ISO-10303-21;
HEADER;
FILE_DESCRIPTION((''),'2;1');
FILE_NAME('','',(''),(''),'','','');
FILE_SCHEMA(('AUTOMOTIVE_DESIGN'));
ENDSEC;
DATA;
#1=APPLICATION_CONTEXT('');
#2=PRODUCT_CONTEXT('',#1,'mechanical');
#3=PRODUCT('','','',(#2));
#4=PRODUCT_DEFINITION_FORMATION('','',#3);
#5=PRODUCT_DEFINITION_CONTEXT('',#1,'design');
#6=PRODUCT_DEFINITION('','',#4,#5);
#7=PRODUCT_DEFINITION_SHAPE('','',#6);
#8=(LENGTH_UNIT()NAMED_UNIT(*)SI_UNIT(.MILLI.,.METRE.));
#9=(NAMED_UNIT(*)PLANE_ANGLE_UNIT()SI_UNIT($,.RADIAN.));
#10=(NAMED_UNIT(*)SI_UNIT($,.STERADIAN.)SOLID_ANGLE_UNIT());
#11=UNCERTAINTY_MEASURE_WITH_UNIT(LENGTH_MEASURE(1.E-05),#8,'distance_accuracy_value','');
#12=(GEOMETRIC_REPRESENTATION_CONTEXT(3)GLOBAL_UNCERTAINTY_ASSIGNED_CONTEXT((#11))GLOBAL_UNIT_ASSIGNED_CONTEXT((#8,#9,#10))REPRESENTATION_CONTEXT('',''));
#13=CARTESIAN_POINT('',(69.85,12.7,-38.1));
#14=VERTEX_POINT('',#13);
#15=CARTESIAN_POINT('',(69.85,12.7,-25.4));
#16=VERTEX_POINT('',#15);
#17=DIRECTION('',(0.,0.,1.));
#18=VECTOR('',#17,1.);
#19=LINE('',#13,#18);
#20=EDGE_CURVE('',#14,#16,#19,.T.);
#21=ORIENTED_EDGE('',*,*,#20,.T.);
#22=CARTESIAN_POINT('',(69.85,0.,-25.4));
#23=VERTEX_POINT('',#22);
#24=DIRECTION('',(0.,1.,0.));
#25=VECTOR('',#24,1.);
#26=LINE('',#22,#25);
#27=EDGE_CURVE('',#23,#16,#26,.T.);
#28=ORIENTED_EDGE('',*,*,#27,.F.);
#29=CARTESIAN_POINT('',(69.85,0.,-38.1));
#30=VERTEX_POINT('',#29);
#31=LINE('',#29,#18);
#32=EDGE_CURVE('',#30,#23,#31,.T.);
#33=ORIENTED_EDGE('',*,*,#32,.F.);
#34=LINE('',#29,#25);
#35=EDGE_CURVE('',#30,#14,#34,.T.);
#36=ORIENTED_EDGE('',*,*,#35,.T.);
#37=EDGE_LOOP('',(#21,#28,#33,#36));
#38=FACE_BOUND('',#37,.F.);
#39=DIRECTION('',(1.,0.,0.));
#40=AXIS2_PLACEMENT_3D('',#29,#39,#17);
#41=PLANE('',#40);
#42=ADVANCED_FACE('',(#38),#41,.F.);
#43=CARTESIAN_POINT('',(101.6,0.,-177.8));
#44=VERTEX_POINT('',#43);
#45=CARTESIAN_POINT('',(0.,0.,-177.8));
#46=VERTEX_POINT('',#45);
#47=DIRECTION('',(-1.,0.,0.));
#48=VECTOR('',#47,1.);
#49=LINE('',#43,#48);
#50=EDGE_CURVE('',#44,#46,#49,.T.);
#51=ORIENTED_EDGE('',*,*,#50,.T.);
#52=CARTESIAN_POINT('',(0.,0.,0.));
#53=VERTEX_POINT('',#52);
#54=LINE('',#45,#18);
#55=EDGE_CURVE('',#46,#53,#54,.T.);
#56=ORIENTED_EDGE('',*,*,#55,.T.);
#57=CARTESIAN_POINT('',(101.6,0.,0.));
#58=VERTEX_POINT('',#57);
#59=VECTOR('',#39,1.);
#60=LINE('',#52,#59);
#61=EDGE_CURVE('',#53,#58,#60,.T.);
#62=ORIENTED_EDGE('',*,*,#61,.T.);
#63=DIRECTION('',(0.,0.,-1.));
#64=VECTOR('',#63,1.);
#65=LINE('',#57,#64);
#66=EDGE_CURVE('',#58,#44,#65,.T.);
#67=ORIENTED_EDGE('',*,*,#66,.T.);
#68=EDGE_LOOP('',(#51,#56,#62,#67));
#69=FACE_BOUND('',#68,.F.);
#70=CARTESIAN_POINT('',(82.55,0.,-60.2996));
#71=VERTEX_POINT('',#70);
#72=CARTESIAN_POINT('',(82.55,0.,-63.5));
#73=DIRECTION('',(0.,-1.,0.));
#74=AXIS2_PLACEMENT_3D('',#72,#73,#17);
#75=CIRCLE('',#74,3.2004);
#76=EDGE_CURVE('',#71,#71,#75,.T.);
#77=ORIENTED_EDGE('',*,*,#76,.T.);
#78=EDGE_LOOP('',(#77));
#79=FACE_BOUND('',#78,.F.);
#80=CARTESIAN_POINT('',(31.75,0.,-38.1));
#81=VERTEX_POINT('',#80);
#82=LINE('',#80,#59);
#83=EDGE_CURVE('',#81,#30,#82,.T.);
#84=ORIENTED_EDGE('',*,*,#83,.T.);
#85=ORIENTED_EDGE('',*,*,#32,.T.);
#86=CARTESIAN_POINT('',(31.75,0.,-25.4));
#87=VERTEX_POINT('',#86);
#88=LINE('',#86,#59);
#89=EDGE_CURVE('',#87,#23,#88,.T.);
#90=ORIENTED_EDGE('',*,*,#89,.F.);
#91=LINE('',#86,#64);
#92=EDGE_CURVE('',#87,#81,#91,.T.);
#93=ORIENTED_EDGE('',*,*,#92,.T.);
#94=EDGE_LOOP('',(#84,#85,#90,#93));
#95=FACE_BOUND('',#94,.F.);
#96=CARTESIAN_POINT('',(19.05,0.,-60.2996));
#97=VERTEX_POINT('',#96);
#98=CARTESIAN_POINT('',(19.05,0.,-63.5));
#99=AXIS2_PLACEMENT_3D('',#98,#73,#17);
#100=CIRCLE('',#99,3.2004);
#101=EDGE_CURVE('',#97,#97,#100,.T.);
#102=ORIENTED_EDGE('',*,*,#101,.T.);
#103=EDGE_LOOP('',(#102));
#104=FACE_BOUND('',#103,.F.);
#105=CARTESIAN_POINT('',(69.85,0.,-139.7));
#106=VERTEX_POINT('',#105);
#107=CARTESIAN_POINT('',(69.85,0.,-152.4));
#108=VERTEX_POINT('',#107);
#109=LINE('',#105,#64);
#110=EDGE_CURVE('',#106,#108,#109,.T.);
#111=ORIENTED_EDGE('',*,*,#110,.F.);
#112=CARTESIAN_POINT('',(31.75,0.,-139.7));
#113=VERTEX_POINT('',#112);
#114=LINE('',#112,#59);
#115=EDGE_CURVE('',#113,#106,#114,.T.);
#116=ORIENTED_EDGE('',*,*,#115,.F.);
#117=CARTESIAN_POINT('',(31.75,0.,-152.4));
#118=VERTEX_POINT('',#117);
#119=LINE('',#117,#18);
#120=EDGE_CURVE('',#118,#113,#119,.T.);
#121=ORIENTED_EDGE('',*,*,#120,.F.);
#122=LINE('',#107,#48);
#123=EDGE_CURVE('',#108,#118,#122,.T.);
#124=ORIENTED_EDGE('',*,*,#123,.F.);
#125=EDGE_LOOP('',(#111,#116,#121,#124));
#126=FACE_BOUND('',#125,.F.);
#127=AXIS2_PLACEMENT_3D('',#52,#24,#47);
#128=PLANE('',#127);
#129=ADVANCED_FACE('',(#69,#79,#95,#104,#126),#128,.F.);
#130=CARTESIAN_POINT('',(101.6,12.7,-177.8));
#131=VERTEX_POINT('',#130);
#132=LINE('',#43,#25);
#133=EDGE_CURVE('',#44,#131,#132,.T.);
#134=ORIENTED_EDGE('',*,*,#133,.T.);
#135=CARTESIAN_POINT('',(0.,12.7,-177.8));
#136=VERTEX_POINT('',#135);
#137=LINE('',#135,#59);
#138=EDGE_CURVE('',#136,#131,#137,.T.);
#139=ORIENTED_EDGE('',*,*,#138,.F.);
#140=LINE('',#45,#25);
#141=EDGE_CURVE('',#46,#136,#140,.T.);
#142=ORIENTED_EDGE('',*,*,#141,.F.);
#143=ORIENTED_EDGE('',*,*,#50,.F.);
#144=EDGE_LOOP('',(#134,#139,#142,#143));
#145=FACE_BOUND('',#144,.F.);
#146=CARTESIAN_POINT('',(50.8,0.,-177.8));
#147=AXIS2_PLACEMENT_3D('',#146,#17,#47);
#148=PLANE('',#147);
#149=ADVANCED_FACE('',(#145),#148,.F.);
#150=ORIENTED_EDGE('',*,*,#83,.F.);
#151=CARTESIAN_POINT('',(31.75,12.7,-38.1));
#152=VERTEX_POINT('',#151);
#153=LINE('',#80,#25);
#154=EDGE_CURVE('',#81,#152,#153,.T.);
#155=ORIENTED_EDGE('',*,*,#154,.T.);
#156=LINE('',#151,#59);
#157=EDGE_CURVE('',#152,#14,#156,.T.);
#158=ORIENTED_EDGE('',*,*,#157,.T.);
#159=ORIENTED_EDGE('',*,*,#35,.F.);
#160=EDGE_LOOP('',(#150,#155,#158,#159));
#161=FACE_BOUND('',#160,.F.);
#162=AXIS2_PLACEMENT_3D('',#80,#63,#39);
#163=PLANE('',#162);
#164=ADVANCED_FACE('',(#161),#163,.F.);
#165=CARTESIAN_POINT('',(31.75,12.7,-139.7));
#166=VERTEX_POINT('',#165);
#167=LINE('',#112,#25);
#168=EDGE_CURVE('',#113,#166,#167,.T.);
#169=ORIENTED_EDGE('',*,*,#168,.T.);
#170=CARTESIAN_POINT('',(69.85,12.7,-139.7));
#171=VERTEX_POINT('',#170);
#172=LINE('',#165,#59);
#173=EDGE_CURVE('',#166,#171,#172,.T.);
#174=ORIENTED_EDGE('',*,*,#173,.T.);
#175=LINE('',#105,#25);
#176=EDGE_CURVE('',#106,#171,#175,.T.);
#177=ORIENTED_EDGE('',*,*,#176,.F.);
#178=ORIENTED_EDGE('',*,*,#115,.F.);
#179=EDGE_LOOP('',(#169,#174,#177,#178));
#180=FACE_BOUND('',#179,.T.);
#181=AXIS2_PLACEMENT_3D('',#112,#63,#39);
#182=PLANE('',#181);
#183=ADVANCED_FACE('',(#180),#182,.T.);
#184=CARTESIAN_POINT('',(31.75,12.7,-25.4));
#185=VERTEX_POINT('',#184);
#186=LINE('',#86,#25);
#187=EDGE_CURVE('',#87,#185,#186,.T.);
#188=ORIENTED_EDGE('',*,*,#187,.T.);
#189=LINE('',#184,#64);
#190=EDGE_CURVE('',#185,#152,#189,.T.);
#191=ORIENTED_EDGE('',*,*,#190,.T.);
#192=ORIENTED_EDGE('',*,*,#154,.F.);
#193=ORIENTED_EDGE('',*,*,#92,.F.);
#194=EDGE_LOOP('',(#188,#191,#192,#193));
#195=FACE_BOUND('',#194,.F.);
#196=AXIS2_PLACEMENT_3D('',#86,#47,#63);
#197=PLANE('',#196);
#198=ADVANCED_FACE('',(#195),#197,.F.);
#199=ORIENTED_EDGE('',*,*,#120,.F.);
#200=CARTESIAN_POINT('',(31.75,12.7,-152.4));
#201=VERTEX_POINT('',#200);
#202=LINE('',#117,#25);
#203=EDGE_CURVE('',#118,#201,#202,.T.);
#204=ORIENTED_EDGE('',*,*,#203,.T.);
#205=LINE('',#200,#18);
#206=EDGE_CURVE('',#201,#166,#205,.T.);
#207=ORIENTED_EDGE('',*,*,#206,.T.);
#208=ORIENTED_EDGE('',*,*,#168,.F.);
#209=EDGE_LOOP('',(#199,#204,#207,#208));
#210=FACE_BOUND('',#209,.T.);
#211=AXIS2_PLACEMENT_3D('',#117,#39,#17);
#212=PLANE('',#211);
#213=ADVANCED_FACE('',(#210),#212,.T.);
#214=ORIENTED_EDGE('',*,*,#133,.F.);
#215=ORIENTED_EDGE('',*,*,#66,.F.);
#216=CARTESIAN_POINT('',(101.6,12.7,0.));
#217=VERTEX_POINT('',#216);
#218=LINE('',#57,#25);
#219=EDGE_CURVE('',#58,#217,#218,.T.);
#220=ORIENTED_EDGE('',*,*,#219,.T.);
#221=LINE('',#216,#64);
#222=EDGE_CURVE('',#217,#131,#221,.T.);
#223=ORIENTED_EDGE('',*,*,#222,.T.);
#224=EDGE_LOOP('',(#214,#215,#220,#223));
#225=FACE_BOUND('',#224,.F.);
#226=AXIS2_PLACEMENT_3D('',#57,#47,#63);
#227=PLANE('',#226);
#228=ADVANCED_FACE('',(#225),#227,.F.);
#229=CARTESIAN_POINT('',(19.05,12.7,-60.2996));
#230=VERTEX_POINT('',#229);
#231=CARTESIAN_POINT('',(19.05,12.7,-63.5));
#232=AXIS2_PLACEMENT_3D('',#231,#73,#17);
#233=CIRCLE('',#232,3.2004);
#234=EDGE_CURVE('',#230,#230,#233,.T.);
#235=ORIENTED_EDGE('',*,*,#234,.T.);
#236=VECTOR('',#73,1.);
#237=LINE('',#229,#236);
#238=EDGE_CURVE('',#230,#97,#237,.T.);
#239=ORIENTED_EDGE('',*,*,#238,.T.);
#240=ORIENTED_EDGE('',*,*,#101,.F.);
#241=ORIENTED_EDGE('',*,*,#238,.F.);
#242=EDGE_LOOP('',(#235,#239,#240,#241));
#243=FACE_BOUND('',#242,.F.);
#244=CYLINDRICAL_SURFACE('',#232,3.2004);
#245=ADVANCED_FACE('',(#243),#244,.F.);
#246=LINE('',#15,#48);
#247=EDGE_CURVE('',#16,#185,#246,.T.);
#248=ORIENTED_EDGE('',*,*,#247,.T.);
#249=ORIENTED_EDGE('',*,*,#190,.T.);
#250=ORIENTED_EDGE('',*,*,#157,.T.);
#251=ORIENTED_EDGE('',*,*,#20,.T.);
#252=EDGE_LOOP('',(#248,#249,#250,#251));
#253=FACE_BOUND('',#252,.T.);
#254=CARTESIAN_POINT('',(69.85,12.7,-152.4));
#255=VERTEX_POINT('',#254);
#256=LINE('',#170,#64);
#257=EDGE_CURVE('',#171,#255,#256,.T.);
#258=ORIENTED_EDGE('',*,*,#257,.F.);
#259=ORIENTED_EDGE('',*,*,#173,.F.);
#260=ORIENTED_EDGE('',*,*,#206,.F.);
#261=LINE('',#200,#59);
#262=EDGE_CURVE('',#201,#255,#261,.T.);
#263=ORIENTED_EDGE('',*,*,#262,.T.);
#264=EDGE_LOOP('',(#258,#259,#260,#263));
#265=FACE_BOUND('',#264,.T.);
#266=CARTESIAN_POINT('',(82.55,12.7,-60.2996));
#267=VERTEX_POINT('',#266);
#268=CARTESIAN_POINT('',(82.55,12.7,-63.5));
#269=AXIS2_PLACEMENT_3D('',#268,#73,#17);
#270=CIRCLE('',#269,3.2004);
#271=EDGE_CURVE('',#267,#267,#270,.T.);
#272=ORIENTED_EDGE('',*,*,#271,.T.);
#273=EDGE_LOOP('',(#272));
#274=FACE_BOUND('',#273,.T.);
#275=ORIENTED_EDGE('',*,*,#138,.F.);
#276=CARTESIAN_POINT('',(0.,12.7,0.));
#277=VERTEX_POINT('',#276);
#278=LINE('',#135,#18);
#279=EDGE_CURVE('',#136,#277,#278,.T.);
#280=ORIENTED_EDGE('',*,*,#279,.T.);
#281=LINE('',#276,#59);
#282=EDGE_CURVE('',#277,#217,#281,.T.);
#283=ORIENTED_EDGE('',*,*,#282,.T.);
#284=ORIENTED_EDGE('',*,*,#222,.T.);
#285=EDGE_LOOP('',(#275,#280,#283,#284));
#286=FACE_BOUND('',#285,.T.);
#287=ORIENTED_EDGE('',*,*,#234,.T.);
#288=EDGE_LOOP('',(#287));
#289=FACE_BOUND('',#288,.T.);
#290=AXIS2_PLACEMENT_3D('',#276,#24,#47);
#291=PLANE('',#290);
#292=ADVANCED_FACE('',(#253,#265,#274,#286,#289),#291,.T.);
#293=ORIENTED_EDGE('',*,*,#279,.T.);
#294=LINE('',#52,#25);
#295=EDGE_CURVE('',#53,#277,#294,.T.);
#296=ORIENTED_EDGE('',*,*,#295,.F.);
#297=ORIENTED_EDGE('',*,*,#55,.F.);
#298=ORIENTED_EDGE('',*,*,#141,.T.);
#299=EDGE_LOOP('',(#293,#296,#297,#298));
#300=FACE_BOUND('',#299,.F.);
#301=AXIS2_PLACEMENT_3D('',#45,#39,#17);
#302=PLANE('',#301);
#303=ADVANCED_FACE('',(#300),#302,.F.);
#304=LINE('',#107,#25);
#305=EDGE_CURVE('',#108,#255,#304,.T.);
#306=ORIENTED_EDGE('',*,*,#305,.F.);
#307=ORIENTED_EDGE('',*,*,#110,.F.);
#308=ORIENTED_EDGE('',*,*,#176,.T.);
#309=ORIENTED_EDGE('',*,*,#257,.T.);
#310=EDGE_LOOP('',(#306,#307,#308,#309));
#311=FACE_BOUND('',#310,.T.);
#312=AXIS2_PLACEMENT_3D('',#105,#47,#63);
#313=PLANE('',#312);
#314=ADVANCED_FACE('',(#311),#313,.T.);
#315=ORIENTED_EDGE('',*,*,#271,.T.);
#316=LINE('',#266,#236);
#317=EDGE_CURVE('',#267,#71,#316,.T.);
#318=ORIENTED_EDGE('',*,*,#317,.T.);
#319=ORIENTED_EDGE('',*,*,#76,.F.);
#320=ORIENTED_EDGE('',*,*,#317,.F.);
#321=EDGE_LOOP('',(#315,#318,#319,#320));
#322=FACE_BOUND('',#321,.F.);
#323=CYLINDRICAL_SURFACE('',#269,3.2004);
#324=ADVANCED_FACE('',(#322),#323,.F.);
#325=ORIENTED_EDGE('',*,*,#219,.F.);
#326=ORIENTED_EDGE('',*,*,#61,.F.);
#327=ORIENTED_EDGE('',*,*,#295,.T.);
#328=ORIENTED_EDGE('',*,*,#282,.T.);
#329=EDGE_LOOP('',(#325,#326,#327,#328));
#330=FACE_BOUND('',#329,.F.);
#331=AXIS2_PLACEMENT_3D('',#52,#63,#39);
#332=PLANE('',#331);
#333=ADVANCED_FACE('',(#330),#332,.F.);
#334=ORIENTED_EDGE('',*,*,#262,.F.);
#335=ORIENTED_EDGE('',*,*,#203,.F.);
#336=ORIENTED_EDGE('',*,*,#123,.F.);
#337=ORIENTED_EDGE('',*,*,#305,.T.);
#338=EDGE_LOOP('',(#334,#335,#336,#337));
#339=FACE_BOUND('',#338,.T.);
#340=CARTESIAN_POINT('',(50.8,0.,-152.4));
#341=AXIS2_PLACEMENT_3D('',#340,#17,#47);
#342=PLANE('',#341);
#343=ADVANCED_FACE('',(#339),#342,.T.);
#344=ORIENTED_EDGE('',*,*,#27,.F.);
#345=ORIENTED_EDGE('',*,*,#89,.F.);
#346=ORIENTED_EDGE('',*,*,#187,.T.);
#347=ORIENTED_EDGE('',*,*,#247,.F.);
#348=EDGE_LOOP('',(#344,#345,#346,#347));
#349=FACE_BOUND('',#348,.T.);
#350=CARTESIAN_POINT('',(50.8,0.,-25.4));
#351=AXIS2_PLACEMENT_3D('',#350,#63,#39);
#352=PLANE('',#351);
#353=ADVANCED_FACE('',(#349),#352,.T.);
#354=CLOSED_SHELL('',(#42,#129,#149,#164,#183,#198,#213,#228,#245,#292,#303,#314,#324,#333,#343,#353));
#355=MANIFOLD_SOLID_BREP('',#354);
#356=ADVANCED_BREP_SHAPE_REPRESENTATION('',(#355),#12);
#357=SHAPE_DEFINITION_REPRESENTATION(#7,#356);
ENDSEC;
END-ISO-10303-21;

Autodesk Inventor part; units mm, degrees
ref_plane "YZ Plane" through (0, 0, 0) normal (1, 0, 0) x (0, 1, 0)
ref_plane "XZ Plane" through (0, 0, 0) normal (0, 1, 0) x (-1, 0, 0)
ref_plane "XY Plane" through (0, 0, 0) normal (0, 0, 1) x (1, 0, 0)
sketch "Sketch1" plane through (0, 0, 0) normal (0, 1, 0) x (-1, 0, 0)
  point P0 (0, 0)
sketch "Sketch2" plane through (0, 0, 0) normal (0, 1, 0) x (-1, 0, 0)
  point P0 (0, 0)
sketch "Sketch3" plane through (0, 0, 0) normal (0, 1, 0) x (-1, 0, 0)
  point P0 (0, 0)
sketch "Sketch4" plane through (0, 0, 0) normal (0, 1, 0) x (-1, 0, 0)
  line L0 (0, 0) -> (-101.6, 0)
  line L1 (-101.6, 0) -> (-101.6, -177.8)
  line L2 (-101.6, -177.8) -> (0, -177.8)
  line L3 (0, -177.8) -> (0, 0)
  line L4 (-50.8, -25.4) -> (-69.85, -25.4)
  line L5 (-69.85, -25.4) -> (-31.75, -25.4)
  line L6 (-31.75, -25.4) -> (-31.75, -38.1)
  line L7 (-31.75, -38.1) -> (-69.85, -38.1)
  line L8 (-69.85, -38.1) -> (-69.85, -25.4)
  line L9 (-50.8, -177.8) -> (-50.8, -152.4)
  line L10 (-50.8, -152.4) -> (-31.75, -152.4)
  line L11 (-31.75, -152.4) -> (-31.75, -139.7)
  line L12 (-31.75, -139.7) -> (-69.85, -139.7)
  line L13 (-69.85, -139.7) -> (-69.85, -152.4)
  line L14 (-69.85, -152.4) -> (-50.8, -152.4)
  dimension "d0" = 101.6
  dimension "d1" = 177.8
  dimension "d3" = 19.05
  dimension "d4" = 38.1
  dimension "d5" = 12.7
  dimension "d6" = 38.1
  dimension "d7" = 25.4
  dimension "d8" = 19.05
  dimension "d9" = 12.7
  dimension "d10" = 38.1
  dimension "d11" = 12.7
extrude "Extrusion1" add sketch "Sketch4" along normal blind 12.7
sketch "Sketch5" plane through (0, 12.7, 0) normal (0, 1, 0) x (1, 0, 0)
  circle A0 centre (19.05, 63.5) radius 3.9688
  circle A1 centre (82.55, 63.5) radius 3.9687
  point P0 (0, 0)
  point P1 (31.75, 38.1)
  dimension "d19" = 7.9375
  dimension "d21" = 7.9375
hole "Hole1" at (19.05, 12.7, -63.5) direction (0, -1, 0) diameter 6.4008 end through all thread size "5/16-18 UNC" class "2B" standard "ANSI Unified Screw Threads"
hole "Hole2" at (82.55, 12.7, -63.5) direction (0, -1, 0) diameter 6.4008 end through all thread size "5/16-18 UNC" class "2B" standard "ANSI Unified Screw Threads"
equation "\"d23\" = d12"
equation "\"d30\" = d12"
equation "\"d12\" = 12.7"
properties part number "wrist_plate"
